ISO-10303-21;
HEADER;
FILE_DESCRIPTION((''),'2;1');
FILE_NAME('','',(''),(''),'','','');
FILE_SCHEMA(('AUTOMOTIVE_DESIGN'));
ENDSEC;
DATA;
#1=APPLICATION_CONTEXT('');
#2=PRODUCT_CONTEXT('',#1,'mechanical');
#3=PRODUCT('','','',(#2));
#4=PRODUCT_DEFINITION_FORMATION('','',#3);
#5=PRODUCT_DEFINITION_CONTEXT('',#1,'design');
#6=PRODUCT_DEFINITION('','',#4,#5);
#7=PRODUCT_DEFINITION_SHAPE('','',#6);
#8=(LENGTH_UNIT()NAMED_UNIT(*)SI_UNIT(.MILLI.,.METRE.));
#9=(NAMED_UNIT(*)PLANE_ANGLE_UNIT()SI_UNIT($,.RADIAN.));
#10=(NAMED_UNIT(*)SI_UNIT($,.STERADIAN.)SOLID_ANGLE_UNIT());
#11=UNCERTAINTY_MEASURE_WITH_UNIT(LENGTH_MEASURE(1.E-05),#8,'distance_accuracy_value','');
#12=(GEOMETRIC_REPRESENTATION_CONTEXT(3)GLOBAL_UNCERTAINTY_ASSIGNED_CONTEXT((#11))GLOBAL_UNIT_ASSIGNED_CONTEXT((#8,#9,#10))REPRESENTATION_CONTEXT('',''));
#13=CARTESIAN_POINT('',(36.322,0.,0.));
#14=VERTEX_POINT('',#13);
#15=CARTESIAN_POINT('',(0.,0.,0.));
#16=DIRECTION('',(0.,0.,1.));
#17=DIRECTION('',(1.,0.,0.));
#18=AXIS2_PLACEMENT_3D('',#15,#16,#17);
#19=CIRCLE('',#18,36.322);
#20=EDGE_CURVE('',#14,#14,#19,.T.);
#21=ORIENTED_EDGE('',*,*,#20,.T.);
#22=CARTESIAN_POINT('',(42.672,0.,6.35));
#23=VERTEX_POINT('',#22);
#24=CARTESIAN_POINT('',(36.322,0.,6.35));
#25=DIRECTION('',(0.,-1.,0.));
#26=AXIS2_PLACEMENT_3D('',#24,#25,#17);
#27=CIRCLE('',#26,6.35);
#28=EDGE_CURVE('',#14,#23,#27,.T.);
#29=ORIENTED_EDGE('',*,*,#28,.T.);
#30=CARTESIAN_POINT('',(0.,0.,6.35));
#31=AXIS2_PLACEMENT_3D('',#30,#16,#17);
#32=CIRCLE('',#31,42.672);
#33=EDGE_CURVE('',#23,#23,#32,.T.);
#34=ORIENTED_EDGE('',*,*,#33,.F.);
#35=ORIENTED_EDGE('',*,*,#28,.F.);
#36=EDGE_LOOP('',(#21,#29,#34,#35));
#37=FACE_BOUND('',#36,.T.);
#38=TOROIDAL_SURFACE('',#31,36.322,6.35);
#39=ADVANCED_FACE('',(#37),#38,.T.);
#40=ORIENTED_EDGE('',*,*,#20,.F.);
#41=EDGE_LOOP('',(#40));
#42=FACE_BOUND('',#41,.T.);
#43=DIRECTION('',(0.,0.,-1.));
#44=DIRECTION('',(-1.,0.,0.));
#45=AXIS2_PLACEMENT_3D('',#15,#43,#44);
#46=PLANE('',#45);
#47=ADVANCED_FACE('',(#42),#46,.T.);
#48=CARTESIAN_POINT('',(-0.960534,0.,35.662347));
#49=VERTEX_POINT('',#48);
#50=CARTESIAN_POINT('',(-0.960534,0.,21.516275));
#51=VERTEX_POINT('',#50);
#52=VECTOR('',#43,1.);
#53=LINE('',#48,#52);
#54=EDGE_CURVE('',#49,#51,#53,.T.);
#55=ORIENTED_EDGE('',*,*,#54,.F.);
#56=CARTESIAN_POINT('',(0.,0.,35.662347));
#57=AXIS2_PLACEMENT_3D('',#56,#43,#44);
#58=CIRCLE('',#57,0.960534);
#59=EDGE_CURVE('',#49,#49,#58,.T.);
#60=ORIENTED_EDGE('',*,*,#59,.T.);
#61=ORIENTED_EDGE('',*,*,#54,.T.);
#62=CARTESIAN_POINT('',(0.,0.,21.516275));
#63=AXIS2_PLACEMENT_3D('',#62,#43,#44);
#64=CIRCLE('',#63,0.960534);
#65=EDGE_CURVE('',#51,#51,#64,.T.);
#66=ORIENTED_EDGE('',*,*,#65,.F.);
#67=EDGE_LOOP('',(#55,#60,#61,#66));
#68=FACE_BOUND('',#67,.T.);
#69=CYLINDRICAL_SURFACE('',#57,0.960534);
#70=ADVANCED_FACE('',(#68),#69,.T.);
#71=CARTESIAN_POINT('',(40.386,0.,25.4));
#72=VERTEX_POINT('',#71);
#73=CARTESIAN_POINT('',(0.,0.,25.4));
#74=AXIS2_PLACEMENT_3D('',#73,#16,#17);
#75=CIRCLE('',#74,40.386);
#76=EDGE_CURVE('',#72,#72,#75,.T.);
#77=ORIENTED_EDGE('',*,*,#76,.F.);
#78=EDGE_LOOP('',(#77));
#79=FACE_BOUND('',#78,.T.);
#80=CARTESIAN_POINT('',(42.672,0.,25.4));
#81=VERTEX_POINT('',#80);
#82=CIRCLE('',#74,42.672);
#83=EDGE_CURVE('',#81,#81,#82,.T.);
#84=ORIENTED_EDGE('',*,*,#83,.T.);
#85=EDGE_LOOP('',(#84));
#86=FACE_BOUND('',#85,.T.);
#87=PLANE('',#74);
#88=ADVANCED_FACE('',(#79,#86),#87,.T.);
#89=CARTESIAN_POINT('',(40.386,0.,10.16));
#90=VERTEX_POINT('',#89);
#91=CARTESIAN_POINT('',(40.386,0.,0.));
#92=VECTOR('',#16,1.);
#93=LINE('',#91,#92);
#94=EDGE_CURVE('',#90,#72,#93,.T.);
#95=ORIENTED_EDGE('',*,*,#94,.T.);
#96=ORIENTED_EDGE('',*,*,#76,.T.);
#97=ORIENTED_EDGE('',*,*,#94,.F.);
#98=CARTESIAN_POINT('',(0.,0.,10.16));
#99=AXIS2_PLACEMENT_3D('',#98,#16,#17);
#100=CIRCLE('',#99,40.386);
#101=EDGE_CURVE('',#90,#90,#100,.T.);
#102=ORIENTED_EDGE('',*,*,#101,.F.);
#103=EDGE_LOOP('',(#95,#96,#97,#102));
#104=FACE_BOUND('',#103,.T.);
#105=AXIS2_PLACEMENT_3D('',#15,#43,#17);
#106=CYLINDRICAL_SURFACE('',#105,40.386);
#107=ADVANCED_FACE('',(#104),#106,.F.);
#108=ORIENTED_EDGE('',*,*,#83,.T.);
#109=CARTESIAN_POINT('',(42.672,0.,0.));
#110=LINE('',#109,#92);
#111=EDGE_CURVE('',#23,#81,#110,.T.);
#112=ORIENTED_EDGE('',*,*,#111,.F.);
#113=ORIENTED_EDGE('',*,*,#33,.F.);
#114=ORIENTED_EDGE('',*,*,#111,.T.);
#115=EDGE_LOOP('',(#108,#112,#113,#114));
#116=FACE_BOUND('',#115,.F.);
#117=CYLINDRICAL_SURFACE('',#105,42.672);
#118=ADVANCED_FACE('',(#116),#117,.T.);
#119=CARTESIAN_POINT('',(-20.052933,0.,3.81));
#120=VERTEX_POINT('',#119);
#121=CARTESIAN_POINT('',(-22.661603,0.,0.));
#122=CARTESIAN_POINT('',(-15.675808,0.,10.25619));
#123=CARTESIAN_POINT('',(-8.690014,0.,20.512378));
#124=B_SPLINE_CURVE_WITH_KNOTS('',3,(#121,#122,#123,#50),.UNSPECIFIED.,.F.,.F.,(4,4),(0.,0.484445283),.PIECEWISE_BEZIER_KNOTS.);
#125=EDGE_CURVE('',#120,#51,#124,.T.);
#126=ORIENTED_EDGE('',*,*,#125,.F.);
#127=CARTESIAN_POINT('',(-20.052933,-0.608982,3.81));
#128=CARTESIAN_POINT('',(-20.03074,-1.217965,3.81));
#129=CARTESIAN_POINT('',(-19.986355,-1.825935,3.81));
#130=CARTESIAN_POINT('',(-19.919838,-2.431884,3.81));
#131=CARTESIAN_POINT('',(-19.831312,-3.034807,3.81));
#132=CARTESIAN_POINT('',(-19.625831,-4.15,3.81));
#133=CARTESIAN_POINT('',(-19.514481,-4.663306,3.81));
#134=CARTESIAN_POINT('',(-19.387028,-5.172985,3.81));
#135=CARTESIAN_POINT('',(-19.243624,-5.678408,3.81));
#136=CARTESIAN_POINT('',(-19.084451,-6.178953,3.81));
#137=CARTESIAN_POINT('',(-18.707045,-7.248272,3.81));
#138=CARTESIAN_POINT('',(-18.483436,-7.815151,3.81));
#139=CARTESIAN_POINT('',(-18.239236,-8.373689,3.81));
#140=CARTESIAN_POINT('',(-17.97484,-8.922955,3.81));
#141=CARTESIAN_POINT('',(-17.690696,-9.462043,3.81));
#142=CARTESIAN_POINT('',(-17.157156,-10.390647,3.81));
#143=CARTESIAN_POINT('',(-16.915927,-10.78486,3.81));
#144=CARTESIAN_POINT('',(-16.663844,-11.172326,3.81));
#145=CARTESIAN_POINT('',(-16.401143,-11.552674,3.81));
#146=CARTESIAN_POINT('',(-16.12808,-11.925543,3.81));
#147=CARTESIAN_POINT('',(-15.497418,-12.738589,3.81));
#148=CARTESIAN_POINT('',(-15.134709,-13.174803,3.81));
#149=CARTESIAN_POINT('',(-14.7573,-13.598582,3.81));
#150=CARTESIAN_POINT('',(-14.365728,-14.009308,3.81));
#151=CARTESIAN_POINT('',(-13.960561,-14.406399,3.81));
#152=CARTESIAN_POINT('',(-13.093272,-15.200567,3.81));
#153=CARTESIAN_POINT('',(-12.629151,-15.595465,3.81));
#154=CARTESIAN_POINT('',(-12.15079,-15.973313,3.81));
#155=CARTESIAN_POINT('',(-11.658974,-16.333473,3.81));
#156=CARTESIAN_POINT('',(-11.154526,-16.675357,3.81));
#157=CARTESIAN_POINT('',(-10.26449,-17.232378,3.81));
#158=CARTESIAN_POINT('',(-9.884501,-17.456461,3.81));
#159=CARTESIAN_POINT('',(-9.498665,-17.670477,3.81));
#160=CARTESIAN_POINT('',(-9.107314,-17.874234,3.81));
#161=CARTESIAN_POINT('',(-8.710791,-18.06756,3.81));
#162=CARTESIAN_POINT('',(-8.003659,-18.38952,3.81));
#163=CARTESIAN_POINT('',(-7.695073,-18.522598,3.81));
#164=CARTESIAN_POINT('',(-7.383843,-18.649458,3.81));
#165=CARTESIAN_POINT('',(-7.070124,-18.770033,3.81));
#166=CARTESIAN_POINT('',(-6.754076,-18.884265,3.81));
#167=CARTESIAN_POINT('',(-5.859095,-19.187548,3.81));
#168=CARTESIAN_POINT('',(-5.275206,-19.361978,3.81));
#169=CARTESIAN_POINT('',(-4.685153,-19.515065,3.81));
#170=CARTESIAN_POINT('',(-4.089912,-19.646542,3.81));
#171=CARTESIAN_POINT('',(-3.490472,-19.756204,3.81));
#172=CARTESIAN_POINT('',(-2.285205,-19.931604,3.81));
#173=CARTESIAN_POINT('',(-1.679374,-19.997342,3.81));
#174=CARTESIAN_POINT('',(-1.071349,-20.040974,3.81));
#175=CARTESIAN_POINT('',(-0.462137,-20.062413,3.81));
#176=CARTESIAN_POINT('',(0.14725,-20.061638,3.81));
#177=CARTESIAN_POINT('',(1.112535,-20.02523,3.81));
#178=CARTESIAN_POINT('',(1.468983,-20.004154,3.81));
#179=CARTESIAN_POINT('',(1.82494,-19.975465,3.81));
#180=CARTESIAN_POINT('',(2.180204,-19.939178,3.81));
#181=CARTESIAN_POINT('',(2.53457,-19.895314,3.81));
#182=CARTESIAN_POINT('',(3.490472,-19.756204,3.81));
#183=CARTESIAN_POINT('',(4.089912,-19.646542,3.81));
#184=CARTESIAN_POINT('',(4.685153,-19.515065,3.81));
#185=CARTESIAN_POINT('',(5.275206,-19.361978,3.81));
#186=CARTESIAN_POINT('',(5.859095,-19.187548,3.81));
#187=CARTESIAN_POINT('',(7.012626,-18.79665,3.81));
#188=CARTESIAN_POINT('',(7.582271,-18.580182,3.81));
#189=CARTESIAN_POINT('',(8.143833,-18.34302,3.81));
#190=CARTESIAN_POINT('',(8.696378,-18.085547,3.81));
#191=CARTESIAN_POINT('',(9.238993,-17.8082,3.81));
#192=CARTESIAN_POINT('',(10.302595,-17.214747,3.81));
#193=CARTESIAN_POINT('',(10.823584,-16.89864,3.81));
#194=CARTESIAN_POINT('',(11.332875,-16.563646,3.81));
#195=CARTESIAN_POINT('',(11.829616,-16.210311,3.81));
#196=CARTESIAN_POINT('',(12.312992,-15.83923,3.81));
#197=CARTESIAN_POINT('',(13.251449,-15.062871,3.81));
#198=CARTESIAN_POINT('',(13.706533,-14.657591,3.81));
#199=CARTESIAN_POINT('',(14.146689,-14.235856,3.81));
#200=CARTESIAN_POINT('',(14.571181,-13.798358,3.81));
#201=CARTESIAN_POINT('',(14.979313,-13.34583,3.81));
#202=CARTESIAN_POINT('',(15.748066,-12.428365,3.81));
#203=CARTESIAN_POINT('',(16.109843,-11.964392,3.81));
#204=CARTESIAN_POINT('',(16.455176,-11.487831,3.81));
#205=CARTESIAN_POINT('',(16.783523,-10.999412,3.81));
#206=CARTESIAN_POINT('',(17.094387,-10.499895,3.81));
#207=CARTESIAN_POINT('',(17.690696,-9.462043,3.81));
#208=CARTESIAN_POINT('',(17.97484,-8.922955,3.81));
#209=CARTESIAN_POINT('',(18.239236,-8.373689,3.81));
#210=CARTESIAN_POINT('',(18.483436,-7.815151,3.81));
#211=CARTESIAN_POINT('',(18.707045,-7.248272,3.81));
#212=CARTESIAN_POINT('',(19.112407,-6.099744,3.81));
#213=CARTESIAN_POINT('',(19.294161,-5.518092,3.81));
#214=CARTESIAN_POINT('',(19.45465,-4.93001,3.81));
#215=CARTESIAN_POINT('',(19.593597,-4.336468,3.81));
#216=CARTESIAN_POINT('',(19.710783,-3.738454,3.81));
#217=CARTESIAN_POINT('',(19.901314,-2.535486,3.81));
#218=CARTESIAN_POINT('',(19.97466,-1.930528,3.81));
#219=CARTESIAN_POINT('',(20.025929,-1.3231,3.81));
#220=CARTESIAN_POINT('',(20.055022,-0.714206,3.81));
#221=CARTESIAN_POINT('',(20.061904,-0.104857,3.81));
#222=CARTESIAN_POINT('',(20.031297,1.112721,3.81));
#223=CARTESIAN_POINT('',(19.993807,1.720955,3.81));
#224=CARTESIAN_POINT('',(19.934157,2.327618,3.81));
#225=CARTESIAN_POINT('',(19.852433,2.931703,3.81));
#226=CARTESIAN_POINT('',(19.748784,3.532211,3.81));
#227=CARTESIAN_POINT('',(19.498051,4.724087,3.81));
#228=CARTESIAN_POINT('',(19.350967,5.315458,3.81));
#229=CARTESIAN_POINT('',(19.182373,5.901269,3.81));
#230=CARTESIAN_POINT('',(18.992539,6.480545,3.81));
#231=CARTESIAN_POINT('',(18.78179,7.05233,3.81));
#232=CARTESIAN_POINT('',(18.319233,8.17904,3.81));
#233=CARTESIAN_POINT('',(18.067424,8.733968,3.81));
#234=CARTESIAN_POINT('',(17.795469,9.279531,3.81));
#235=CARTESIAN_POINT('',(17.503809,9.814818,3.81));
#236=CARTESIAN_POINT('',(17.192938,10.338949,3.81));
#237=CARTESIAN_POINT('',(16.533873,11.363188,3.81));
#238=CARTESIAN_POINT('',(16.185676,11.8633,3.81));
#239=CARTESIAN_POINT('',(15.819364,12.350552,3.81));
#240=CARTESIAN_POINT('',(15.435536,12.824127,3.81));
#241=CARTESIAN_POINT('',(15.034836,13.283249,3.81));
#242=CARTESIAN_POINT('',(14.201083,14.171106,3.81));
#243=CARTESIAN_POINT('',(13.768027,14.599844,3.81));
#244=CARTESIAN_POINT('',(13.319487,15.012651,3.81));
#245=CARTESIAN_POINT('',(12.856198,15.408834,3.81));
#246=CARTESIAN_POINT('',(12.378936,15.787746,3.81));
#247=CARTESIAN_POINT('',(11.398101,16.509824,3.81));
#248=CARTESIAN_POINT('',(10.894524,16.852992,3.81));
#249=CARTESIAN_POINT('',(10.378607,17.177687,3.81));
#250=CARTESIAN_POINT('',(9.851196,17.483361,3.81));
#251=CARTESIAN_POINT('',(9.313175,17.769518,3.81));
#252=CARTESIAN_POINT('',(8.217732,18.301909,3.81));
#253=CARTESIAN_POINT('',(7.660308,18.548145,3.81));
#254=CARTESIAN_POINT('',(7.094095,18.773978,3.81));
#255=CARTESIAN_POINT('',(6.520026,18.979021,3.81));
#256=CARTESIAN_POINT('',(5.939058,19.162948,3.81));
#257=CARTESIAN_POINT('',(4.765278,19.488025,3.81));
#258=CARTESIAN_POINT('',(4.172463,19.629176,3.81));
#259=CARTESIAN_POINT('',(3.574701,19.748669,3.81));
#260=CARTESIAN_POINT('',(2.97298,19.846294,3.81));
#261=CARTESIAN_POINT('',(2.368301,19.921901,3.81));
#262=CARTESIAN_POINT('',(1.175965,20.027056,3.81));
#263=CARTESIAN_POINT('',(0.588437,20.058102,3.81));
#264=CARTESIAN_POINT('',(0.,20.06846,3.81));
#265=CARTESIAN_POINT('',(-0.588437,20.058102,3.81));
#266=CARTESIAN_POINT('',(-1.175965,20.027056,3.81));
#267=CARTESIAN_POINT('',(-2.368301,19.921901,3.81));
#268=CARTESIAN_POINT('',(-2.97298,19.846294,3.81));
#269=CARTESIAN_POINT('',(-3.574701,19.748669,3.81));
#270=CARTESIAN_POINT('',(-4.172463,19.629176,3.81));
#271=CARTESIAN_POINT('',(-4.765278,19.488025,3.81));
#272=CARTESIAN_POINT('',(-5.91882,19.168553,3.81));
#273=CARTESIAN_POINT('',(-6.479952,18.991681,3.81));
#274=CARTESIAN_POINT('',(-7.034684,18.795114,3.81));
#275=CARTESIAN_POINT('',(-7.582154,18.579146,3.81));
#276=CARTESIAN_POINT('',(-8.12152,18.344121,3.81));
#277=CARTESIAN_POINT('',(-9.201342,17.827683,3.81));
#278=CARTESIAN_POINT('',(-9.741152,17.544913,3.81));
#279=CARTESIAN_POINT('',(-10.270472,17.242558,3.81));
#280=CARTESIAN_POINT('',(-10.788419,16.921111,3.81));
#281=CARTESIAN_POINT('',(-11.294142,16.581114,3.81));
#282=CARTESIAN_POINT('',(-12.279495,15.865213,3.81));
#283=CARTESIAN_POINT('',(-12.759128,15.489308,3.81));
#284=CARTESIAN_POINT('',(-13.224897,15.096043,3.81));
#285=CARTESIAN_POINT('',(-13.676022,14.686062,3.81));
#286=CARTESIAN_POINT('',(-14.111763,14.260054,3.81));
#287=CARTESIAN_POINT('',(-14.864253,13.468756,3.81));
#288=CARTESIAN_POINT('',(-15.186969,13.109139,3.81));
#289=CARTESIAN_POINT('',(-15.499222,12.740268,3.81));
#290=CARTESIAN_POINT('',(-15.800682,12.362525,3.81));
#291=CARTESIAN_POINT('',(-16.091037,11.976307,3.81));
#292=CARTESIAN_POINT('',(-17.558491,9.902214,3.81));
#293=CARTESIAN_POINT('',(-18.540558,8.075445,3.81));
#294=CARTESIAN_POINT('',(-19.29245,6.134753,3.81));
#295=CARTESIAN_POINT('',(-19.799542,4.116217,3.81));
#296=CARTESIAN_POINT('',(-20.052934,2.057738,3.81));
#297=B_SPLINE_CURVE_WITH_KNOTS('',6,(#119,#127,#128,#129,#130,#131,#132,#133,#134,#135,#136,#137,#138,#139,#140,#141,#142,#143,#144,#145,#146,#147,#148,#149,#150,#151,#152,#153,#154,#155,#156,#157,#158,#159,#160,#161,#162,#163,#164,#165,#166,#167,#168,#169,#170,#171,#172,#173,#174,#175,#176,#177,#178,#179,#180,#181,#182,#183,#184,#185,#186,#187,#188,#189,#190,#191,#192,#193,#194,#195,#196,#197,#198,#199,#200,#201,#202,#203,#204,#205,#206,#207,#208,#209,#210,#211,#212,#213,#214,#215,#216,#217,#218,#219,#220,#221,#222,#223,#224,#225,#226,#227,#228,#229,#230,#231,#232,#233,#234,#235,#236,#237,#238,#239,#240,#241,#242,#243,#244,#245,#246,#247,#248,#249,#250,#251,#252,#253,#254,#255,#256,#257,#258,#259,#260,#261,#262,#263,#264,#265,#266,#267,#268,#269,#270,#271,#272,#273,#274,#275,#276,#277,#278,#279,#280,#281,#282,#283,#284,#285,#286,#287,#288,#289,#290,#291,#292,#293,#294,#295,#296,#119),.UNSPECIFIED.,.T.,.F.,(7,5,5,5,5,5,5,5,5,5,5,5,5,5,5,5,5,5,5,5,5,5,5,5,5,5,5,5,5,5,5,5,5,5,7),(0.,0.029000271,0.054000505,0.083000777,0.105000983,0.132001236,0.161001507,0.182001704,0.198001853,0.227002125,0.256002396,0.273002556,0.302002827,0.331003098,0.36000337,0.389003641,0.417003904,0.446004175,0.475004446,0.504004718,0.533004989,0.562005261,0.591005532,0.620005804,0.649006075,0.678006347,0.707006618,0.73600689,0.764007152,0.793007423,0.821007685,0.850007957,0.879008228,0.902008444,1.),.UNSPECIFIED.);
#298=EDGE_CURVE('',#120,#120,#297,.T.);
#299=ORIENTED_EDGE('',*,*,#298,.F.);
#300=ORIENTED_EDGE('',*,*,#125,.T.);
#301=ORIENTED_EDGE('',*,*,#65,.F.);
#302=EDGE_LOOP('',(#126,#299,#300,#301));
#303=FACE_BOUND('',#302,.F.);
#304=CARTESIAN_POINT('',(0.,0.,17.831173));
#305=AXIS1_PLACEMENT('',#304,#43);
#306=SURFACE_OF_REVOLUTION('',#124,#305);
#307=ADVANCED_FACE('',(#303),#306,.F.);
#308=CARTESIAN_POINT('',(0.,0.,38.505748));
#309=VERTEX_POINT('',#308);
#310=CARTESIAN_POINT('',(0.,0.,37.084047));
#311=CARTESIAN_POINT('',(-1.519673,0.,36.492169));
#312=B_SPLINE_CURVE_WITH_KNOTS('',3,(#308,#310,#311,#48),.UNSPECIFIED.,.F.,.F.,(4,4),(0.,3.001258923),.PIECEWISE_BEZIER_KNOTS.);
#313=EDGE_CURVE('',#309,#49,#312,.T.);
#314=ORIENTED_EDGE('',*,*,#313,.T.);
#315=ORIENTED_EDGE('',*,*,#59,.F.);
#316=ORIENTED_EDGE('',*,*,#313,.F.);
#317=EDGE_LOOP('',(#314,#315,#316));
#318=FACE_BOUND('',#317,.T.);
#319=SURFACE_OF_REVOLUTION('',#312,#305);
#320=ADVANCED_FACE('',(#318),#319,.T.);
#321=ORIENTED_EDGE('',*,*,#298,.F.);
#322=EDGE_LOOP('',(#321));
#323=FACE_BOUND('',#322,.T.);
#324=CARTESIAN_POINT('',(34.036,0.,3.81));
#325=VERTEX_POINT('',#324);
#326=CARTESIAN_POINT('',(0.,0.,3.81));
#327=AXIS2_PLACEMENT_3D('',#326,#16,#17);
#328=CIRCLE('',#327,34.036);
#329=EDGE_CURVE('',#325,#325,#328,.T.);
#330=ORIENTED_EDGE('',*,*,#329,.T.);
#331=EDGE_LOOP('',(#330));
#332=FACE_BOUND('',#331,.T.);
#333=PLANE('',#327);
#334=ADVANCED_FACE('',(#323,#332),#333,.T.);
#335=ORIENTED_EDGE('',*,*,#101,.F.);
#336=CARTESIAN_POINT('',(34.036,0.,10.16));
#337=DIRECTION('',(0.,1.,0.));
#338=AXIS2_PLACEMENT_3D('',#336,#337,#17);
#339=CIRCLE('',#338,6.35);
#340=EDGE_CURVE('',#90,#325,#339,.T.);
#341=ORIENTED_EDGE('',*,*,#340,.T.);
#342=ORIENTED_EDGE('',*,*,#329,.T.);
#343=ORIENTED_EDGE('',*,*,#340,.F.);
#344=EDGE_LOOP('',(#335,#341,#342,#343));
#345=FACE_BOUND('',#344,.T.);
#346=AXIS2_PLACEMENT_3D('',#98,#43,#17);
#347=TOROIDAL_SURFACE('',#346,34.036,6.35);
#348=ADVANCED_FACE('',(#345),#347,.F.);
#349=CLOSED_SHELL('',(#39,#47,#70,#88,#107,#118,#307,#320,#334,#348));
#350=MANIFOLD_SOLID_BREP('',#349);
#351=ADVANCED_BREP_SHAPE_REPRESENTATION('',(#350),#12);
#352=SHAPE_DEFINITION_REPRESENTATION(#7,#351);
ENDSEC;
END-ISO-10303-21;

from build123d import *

# Parameters (mm, degrees)
F0_R     = 42.672
F0_R_2   = 40.386
F2_DEPTH = 25.4
F3_DEPTH = 3.81
F5_R     = 6.35


# Not quite as in the source:
# - a feature names something its author has since deleted; it is built from what else it names


with BuildPart() as f2:
    # F0 (on Top) → F2 (new body)
    with BuildSketch(Plane.XY):
        Circle(F0_R)
        Circle(F0_R_2, mode=Mode.SUBTRACT)
    extrude(amount=F2_DEPTH)

    # F0 (on Top) → F3 (join)
    with BuildSketch(Plane.XY):
        Circle(F0_R_2)
    extrude(amount=F3_DEPTH)

    # F1 (on Front) → F4 (revolve)
    with BuildSketch(Plane.XZ):
        with BuildLine():
            Line((-22.661603124, 0), (-0.3999708066, 0))
            Line((-0.3999708066, 0), (0, 0))
            Line((0, 0), (0, 21.5927247815))
            add(Edge.make_bspline(
                [(-0.9605343803, 21.5162747094), (-0.7741159133, 21.5404865376), (-0.4544785974, 21.5726982013), (-0.1335448781, 21.5887811226), (0, 21.5927247815)],
                knots=[0.4844452831, 0.4844452831, 0.4844452831, 0.4844452831, 0.4961290643, 0.5044321792, 0.5044321792, 0.5044321792, 0.5044321792], degree=3))
            add(Edge.make_bspline(
                [(-22.661603124, 0), (-15.6758083409, 10.256190155), (-8.6900138326, 20.5123783076), (-0.9605343803, 21.5162747094)],
                knots=[0, 0, 0, 0, 0.4844452831, 0.4844452831, 0.4844452831, 0.4844452831], degree=3))
        make_face()
        with BuildLine():
            Line((-0.9605343803, 35.6623469879), (0, 35.6623469879))
            Line((0, 35.6623469879), (0, 38.5057479143))
            add(Edge.make_bspline(
                [(0, 38.5057479143), (0, 37.0840474511), (-1.5196733875, 36.4921689034), (-0.9605343803, 35.6623469879)],
                knots=[0, 0, 0, 0, 3.0012589232, 3.0012589232, 3.0012589232, 3.0012589232], degree=3))
        make_face()
        with BuildLine():
            add(Edge.make_bspline(
                [(-0.9605343803, 21.5162747094), (-0.7741159133, 21.5404865376), (-0.4544785974, 21.5726982013), (-0.1335448781, 21.5887811226), (0, 21.5927247815)],
                knots=[0.4844452831, 0.4844452831, 0.4844452831, 0.4844452831, 0.4961290643, 0.5044321792, 0.5044321792, 0.5044321792, 0.5044321792], degree=3))
            Line((0, 21.5927247815), (0, 35.6623469879))
            Line((0, 35.6623469879), (-0.9605343803, 35.6623469879))
            Line((-0.9605343803, 35.6623469879), (-0.9605343803, 21.5162747094))
        make_face()
    revolve(axis=Axis((0, 0, 17.8311734939), (0, 0, -1)))

    # F5
    f5_edges = [f2.edges().sort_by_distance(p)[0] for p in [
        (-40.386, 0, 3.81),
        (-42.672, 0, 0),
    ]]
    fillet(f5_edges, radius=F5_R)


solid = f2.part
